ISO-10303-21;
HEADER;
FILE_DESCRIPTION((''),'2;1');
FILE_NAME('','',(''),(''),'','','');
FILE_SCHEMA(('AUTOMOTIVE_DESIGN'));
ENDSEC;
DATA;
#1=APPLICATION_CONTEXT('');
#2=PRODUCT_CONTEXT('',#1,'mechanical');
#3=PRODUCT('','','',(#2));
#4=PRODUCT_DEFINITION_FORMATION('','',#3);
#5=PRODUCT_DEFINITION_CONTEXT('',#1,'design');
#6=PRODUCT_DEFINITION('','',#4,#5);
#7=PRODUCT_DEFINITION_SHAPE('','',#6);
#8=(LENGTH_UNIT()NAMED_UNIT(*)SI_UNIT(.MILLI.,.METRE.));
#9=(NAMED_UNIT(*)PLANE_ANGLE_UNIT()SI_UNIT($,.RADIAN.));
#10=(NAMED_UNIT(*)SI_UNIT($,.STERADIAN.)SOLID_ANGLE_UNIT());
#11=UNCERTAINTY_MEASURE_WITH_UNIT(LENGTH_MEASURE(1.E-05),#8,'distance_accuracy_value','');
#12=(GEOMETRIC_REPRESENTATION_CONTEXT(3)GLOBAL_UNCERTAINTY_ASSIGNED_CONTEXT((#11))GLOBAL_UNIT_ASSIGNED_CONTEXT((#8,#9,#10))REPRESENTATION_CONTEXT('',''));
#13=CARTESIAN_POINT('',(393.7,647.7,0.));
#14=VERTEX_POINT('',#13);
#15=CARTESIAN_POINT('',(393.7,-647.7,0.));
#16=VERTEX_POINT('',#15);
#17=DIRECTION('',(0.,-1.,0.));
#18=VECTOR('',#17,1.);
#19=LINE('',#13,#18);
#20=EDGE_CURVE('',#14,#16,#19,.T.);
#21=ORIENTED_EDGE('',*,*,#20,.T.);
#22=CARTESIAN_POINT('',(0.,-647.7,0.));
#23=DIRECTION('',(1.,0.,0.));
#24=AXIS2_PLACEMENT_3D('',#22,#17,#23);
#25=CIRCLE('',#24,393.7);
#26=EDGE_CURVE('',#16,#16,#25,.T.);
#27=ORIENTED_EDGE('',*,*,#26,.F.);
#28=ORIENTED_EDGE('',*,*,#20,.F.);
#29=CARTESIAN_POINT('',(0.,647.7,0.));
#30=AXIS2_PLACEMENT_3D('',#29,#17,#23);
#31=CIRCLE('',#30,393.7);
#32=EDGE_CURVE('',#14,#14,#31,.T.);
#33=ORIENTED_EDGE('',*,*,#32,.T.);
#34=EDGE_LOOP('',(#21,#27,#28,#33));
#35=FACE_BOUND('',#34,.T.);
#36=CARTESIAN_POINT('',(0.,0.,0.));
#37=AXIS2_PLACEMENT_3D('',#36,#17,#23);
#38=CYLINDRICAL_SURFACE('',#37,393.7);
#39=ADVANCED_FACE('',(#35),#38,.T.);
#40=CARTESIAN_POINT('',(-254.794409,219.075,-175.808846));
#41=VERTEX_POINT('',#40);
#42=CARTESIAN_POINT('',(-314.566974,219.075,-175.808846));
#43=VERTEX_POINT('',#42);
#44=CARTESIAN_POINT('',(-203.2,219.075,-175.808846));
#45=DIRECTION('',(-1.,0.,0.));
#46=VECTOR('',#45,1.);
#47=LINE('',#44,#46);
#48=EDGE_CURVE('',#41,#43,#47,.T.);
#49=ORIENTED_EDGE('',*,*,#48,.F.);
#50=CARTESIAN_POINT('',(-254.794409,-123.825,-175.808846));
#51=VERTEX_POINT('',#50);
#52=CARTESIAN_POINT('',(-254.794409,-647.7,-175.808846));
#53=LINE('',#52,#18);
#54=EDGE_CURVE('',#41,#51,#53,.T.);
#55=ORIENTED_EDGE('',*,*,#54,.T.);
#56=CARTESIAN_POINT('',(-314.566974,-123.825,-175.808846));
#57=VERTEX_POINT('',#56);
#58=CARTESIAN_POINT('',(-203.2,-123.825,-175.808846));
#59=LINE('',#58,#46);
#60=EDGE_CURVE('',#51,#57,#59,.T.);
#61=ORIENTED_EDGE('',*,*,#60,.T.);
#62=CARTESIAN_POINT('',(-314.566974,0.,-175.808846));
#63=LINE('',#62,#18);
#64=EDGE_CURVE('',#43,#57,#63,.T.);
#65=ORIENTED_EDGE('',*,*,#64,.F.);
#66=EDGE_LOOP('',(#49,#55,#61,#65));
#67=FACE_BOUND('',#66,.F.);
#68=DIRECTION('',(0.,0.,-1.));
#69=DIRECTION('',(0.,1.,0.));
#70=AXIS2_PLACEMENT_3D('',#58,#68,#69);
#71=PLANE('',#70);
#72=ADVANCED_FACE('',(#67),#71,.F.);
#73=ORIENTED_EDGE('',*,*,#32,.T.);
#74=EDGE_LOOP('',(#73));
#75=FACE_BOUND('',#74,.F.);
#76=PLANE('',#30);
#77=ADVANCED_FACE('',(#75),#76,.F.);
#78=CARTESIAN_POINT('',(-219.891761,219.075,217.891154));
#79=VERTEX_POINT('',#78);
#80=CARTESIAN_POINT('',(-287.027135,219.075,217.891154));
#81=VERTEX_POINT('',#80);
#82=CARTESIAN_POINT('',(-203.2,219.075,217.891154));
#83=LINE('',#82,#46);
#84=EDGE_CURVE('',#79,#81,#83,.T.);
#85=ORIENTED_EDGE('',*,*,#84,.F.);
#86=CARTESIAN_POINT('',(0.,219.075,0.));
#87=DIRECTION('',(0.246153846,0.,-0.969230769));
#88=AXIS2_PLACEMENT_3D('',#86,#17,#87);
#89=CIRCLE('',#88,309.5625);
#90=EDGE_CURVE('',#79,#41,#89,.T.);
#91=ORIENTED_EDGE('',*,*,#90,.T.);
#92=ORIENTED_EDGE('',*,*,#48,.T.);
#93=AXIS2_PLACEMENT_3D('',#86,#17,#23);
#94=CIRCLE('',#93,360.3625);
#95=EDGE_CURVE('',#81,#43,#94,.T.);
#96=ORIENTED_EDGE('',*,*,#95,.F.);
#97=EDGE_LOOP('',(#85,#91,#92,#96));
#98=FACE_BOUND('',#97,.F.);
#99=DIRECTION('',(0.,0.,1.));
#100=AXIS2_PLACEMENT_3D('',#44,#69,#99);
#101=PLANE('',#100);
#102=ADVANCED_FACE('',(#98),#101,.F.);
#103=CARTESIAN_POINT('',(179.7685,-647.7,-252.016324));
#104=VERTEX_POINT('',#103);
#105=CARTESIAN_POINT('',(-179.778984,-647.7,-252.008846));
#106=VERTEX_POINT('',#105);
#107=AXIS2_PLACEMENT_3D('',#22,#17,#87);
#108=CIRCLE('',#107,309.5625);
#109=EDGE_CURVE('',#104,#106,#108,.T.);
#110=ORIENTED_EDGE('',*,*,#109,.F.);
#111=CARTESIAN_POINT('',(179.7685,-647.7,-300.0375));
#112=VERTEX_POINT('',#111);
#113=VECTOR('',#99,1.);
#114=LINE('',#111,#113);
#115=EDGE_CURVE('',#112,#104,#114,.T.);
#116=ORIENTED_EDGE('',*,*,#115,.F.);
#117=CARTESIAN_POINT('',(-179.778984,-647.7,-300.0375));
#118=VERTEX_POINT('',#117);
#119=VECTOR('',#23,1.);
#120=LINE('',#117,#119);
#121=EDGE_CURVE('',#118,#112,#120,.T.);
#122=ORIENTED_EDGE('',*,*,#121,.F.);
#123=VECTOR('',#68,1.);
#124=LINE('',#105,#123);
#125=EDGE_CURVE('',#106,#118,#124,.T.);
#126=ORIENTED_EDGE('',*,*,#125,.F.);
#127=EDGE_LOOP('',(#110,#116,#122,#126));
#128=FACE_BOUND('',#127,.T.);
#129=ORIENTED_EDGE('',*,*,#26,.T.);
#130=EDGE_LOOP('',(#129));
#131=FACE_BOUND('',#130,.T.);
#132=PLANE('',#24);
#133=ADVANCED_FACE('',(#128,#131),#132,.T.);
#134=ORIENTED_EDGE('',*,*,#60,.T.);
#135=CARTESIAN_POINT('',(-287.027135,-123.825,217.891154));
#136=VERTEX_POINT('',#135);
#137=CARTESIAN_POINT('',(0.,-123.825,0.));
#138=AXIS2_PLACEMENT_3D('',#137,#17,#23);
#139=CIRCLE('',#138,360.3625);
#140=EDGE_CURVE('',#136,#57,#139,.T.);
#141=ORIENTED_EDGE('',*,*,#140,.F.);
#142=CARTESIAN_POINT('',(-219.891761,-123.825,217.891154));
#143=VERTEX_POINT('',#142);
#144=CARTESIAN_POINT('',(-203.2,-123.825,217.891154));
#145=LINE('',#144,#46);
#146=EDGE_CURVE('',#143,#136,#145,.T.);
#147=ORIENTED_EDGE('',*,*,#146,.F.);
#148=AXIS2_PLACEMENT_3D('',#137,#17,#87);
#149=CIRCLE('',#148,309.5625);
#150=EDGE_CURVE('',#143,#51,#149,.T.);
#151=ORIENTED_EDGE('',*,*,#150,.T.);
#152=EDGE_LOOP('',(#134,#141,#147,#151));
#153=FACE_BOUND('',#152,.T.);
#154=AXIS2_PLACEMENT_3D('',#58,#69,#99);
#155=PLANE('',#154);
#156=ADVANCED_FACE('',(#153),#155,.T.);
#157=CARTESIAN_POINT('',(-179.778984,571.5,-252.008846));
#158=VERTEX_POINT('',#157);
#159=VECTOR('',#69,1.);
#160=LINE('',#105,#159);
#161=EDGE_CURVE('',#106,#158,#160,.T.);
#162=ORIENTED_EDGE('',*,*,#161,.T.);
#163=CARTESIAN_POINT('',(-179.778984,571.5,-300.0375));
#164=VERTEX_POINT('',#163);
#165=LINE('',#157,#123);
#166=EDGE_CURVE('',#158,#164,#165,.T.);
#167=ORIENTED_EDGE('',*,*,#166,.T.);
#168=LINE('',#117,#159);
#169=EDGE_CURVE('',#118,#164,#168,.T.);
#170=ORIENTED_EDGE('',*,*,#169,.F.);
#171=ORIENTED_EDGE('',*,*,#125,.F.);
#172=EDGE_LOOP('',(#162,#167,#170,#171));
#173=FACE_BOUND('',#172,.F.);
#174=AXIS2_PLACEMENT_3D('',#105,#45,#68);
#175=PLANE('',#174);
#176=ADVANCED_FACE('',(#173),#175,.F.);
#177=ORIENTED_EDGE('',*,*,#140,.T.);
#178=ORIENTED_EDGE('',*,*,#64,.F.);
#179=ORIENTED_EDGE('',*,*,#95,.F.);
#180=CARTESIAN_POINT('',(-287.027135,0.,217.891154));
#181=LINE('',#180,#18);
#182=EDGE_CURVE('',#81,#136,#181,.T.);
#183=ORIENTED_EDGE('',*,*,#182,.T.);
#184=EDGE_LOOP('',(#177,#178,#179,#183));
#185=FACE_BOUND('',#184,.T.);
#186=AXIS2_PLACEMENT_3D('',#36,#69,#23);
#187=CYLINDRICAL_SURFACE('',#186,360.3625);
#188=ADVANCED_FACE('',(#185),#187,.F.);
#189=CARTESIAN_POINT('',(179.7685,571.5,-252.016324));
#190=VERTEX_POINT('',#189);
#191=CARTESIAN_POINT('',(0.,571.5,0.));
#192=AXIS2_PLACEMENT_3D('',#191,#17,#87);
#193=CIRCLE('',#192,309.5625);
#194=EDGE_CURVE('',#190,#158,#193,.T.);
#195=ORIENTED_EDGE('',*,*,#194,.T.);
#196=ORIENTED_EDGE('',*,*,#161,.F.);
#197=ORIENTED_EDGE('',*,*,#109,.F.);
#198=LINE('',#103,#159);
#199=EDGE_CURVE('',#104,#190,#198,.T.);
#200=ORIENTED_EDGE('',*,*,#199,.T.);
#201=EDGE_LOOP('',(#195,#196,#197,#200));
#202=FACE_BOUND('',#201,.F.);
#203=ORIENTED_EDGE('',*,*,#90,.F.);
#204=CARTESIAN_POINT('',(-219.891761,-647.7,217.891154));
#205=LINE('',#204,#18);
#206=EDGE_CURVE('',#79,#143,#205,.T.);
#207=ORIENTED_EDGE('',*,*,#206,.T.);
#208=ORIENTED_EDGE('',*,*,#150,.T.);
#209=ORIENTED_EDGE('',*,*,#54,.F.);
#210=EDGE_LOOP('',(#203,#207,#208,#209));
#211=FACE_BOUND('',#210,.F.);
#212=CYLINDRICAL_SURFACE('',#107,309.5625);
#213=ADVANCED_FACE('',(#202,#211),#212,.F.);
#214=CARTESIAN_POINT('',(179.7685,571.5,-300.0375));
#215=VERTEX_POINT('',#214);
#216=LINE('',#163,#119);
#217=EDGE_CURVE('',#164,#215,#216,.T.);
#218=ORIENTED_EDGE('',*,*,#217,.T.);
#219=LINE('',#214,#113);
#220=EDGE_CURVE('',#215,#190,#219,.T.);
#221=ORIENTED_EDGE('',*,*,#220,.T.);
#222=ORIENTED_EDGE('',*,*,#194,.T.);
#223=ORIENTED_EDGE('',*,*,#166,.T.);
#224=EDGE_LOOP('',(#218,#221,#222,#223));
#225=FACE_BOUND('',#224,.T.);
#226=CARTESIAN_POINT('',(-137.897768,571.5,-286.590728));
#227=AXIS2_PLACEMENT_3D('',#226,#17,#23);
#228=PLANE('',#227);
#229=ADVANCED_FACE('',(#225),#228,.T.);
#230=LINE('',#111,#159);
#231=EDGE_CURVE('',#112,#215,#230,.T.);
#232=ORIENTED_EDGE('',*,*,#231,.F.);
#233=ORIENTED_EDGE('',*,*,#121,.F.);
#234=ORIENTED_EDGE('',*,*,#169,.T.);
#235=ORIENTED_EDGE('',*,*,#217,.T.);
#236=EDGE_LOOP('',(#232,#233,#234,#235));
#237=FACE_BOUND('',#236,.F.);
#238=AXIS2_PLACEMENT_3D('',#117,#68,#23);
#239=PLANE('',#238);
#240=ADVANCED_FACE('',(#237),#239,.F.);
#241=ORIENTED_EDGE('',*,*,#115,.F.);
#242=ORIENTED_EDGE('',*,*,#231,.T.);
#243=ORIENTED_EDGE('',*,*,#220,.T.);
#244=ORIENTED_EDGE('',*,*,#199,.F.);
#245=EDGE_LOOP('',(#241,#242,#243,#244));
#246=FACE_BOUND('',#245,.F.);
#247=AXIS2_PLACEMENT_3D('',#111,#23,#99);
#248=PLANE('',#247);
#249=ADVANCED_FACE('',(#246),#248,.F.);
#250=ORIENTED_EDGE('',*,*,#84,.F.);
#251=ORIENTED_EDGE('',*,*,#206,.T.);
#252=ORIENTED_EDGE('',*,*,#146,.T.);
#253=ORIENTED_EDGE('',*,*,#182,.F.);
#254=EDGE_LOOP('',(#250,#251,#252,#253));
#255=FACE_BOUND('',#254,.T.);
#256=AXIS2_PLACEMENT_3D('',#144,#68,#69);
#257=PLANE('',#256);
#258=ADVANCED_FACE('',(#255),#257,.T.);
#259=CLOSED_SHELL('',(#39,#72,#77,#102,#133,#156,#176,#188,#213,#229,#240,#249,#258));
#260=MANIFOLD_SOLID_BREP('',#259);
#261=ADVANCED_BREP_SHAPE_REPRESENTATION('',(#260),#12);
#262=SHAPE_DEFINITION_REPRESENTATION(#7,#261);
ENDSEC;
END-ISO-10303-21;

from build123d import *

# Parameters (mm, degrees)
F0_R     = 360.3625
F1_DEPTH = 647.7
F3_DEPTH = 1219.2
F5_W     = 342.9
F5_H     = 393.7
F6_DEPTH = 279.4
F7_R     = 393.7
F7_R_2   = 360.3625
F8_DEPTH = 647.7


# Not quite as in the source:
# - a feature names something its author has since deleted; it is built from what else it names


with BuildPart() as f1:
    # F0 (on Front) → F1 (new body, symmetric)
    with BuildSketch(Plane.XZ):
        Circle(F0_R)
    extrude(amount=F1_DEPTH, both=True)

    # F2 (on face) → F3 (cut)
    with BuildSketch(Plane.XZ.offset(647.7)):
        with BuildLine():
            ThreePointArc((-76.2, -300.0375), (-130.2228778271, -280.8397113954), (-179.7789835799, -252.0088460138))
            Line((-179.7789835799, -252.0088460138), (-179.7789835799, -300.0375))
            Line((-179.7789835799, -300.0375), (-76.2, -300.0375))
        make_face()
        with BuildLine():
            ThreePointArc((179.7685, -252.016324499), (275.2076740277, -141.7380596823), (309.5625, 0))
            ThreePointArc((309.5625, 0), (-141.7323354104, 275.2106220794), (-179.7789835799, -252.0088460138))
            ThreePointArc((-179.7789835799, -252.0088460138), (-130.2228778271, -280.8397113954), (-76.2, -300.0375))
            Line((-76.2, -300.0375), (76.2, -300.0375))
            ThreePointArc((76.2, -300.0375), (130.217036413, -280.8424199334), (179.7685, -252.016324499))
        make_face()
        with BuildLine():
            Line((179.7685, -300.0375), (179.7685, -252.016324499))
            ThreePointArc((179.7685, -252.016324499), (130.217036413, -280.8424199334), (76.2, -300.0375))
            Line((76.2, -300.0375), (179.7685, -300.0375))
        make_face()
    extrude(amount=-F3_DEPTH, mode=Mode.SUBTRACT)

    # F5 (on offset) → F6 (cut)
    with BuildSketch(Plane.YZ.offset(-203.2)):
        with Locations((47.625, 21.0411539862)):
            Rectangle(F5_W, F5_H)
    extrude(amount=-F6_DEPTH, mode=Mode.SUBTRACT)

    # F7 (on Front) → F8 (join, symmetric)
    with BuildSketch(Plane.XZ):
        Circle(F7_R)
        Circle(F7_R_2, mode=Mode.SUBTRACT)
    extrude(amount=F8_DEPTH, both=True)


solid = f1.part
